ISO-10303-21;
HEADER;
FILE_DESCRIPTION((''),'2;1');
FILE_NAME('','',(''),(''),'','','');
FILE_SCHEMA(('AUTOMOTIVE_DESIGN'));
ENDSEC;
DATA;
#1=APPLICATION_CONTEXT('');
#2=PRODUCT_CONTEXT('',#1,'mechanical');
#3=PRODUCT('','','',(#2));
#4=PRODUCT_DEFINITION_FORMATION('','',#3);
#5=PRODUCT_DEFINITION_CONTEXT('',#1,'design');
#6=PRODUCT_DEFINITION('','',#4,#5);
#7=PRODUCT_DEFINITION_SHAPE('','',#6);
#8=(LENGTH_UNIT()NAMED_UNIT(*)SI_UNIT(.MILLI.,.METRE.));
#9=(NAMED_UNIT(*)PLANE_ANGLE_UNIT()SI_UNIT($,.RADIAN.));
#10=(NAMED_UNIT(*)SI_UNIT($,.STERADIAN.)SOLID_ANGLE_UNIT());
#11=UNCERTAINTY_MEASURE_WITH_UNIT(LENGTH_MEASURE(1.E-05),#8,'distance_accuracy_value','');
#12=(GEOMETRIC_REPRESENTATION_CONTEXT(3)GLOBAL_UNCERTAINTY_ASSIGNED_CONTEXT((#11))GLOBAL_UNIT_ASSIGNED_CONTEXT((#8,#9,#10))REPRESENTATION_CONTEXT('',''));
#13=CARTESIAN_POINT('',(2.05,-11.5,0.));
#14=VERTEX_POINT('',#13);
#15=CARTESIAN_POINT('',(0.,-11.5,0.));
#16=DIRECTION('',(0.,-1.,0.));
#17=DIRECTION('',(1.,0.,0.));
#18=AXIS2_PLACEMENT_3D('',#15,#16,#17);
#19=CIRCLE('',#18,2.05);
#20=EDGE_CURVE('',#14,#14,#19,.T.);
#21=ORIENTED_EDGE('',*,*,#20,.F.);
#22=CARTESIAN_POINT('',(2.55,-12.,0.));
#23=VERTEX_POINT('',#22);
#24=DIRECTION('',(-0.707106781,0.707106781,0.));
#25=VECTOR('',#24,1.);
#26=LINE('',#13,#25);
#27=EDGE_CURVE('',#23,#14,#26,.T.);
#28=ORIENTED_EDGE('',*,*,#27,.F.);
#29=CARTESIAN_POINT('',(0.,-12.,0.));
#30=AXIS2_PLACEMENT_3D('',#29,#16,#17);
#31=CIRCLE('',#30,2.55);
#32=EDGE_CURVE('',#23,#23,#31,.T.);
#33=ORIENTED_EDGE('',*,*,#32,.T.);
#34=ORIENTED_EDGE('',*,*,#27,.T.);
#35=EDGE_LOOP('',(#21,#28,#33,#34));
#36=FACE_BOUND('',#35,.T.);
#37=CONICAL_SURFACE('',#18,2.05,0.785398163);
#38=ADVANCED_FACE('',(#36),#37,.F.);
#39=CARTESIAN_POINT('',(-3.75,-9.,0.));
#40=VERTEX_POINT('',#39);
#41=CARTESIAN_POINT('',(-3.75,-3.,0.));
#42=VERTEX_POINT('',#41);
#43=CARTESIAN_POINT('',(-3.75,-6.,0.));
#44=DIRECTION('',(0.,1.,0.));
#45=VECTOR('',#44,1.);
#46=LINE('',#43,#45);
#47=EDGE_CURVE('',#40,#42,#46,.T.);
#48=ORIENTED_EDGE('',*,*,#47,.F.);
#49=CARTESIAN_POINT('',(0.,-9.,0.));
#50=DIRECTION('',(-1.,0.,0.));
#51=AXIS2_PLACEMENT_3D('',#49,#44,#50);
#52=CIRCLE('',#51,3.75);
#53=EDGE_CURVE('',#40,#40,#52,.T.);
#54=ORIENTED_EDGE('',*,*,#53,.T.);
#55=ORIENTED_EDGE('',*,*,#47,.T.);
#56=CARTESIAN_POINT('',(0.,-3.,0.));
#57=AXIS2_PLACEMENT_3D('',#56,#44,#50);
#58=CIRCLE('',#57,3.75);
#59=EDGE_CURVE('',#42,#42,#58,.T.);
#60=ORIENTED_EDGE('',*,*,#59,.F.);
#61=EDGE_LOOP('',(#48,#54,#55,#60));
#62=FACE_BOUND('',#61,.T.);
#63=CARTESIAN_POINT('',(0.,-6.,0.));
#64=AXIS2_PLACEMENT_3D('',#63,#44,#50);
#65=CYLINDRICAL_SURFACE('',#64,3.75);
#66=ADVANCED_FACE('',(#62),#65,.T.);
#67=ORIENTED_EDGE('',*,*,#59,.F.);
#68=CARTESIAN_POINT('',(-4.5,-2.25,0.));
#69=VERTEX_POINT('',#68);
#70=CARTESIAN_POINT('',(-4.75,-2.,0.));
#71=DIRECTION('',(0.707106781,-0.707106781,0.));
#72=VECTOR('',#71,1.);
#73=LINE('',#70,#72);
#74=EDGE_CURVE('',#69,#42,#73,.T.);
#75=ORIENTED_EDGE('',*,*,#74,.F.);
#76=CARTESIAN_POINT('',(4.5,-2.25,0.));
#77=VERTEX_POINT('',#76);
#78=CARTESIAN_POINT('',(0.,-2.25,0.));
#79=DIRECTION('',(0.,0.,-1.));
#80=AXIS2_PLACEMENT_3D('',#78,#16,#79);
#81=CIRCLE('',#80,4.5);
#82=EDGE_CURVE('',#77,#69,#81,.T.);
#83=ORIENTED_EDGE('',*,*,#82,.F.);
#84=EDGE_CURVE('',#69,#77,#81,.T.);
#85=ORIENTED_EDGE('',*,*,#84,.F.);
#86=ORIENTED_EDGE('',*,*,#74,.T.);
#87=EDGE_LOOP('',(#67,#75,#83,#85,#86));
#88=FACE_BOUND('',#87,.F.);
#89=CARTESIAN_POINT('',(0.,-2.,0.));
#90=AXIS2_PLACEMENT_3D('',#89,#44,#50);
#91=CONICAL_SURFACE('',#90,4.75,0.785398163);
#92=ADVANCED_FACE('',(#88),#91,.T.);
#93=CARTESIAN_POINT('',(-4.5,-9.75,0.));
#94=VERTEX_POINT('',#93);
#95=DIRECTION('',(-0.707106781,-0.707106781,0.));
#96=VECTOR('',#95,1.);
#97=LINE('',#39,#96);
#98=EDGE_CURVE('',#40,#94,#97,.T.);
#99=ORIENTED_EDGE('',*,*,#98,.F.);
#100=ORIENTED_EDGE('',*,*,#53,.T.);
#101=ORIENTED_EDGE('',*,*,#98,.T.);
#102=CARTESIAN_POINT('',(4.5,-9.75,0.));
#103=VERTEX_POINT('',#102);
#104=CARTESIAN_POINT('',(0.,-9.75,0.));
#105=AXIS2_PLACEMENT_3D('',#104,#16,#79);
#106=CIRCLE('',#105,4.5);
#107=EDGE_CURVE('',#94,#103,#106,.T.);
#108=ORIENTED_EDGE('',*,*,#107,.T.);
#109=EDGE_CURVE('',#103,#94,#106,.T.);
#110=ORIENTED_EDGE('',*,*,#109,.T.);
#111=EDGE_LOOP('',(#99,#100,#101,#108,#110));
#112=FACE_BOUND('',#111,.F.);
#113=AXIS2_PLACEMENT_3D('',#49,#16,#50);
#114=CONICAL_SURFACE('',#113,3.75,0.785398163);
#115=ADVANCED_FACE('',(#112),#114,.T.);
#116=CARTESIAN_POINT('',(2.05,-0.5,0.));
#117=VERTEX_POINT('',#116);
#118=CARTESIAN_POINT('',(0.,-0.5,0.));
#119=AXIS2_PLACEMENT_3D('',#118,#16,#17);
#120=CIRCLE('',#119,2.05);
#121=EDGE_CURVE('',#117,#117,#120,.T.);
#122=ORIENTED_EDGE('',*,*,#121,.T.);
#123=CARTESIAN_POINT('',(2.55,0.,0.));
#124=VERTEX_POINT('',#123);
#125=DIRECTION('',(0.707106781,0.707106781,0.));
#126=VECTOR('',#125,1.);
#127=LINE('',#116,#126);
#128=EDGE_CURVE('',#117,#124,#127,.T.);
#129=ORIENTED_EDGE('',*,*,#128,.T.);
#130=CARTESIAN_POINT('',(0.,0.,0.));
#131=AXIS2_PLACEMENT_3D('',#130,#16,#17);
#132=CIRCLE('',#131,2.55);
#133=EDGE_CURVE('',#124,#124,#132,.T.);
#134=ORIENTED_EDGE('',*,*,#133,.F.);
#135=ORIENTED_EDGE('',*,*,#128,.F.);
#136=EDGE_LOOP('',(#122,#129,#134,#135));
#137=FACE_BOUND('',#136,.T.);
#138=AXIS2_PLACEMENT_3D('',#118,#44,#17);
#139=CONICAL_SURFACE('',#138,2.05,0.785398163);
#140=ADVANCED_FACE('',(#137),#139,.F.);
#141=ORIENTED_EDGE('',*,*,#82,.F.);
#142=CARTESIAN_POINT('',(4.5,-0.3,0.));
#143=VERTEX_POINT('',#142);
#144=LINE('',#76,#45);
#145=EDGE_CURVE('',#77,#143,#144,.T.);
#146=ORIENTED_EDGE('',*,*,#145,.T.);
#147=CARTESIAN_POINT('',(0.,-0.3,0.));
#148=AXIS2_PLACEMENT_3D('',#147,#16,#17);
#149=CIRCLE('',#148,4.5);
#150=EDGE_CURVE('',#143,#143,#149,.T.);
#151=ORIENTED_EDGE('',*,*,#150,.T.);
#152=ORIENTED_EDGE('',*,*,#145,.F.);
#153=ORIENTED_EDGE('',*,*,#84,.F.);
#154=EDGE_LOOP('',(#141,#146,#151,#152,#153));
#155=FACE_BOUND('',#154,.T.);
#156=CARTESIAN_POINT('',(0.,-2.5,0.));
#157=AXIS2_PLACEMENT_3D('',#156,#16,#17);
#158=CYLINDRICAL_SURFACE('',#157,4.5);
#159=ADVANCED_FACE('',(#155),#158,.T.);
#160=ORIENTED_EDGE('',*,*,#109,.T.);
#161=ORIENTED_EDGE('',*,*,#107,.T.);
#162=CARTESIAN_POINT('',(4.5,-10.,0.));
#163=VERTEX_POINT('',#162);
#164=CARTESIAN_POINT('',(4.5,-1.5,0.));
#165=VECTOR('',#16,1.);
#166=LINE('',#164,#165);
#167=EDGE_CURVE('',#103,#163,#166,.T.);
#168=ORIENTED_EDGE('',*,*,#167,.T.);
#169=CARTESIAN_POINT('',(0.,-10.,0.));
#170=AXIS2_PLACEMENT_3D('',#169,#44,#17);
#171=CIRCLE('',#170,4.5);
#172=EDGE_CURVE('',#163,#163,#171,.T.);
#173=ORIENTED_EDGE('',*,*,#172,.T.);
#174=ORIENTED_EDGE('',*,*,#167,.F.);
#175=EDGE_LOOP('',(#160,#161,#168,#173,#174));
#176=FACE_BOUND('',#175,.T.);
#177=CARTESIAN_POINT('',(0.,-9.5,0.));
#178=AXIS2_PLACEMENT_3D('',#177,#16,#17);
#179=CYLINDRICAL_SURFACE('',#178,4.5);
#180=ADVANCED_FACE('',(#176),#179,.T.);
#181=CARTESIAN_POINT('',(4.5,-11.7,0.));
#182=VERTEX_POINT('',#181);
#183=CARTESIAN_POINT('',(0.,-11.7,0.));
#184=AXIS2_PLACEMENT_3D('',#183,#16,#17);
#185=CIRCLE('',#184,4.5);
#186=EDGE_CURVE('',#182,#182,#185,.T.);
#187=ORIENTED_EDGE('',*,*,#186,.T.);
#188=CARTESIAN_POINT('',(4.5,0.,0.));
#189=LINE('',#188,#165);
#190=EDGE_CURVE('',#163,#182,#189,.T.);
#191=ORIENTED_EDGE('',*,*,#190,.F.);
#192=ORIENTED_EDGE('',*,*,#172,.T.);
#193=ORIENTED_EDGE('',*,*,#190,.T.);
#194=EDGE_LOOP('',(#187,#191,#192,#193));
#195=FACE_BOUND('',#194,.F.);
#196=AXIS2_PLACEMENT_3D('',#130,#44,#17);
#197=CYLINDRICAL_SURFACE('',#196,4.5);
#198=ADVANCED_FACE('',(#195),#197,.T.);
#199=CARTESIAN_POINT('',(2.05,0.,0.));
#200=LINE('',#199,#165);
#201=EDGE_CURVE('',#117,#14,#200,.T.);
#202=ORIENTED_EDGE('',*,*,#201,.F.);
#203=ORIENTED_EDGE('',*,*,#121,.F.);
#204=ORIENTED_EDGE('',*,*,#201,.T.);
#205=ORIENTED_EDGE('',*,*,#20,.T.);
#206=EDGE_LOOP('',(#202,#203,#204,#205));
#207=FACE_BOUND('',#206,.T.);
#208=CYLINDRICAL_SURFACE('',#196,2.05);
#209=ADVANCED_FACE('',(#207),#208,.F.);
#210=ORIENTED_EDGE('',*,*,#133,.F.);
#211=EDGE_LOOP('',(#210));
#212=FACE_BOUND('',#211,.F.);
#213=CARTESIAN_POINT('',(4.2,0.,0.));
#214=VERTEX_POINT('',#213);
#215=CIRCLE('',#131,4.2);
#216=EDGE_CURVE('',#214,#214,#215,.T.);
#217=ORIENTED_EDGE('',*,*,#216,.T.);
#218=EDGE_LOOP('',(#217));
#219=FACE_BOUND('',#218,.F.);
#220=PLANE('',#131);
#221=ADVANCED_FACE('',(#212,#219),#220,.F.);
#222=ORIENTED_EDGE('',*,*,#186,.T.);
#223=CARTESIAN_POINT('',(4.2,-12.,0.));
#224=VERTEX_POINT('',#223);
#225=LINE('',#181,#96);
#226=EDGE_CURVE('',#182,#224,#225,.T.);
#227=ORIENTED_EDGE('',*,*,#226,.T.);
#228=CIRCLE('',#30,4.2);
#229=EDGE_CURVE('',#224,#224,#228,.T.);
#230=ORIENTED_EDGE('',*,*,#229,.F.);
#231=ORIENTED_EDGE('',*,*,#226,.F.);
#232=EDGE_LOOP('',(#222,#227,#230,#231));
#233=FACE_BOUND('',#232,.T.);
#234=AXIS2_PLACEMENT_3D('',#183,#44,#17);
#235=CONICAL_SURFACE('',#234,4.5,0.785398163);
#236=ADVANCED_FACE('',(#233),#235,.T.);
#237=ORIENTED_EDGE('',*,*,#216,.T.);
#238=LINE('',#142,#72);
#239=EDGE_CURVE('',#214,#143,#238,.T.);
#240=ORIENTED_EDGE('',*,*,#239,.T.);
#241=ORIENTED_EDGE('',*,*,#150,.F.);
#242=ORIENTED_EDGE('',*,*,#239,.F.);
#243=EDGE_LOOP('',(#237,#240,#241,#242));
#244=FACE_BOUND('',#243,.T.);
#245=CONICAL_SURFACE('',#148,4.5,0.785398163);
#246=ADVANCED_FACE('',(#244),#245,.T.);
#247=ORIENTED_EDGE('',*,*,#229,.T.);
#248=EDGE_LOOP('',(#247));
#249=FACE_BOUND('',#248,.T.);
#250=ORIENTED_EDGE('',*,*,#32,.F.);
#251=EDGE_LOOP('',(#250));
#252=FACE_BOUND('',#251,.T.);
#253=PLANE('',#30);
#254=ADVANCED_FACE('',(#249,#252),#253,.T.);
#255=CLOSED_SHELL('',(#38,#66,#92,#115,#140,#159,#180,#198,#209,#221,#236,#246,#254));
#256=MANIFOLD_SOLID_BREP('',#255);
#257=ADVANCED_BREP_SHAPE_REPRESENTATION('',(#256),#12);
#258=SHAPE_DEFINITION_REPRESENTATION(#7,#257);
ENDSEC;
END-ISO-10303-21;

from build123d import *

# Parameters (mm, degrees)
F0_R         = 4.5
F0_R_2       = 2.05
F1_DEPTH     = 12
F2_SIZE      = 0.3
F3_SIZE      = 0.5
F4_SIZE      = 0.5
F5_SIZE      = 0.3
F6_W         = 0.7801173814
F6_H         = 8
F8_S5_R      = 4.5
F8_T6_DEPTH  = 8
F8_S11_R     = 4.5
F8_T12_DEPTH = 8


# Not quite as in the source:
# - a fillet or chamfer that OpenCascade refuses, or shapes differently, is made with other operations: its cross-section is extruded or revolved along the edge and cut away or added


with BuildPart() as f1:
    # F0 (on Front) → F1 (new body)
    with BuildSketch(Plane.XZ):
        Circle(F0_R)
        Circle(F0_R_2, mode=Mode.SUBTRACT)
    extrude(amount=F1_DEPTH)

    # F2
    f2_edges = [f1.edges().sort_by_distance(p)[0] for p in [
        (-4.5, -12, 0),
    ]]
    chamfer(f2_edges, length=F2_SIZE)

    # F3
    f3_edges = [f1.edges().sort_by_distance(p)[0] for p in [
        (-2.05, -12, 0),
    ]]
    chamfer(f3_edges, length=F3_SIZE)

    # F4
    f4_edges = [f1.edges().sort_by_distance(p)[0] for p in [
        (-2.05, 0, 0),
    ]]
    chamfer(f4_edges, length=F4_SIZE)

    # F5
    f5_edges = [f1.edges().sort_by_distance(p)[0] for p in [
        (-4.5, 0, 0),
    ]]
    chamfer(f5_edges, length=F5_SIZE)

    # F6 (on Top) → F7 (revolve, cut)
    with BuildSketch(Plane.XY):
        with Locations((-4.1400586907, -6)):
            Rectangle(F6_W, F6_H)
    revolve(axis=Axis((0, 2.6414038148, 0), (0, 1, 0)), mode=Mode.SUBTRACT)

    # F8: chamfer of 1 on 3 edges, made by hand


with BuildPart() as f8_tool2:
    # F8_s3 → F8_t4 (revolve)
    with BuildSketch(Plane.XY):
        Polygon((-3.75, -9), (-4.75, -10), (-3.75, -10), align=None)
    revolve(axis=Axis((0, -10, 0), (0, 1, 0)))

    # F8_s5 → F8_t6 (intersect, symmetric)
    with BuildSketch(Plane.XZ.offset(9.5)):
        Circle(F8_S5_R)
    extrude(amount=F8_T6_DEPTH, both=True, mode=Mode.INTERSECT)


with BuildPart() as f1_1:
    add(f1.part)

    # F8_t1: union F8_tool2
    add(f8_tool2.part)


with BuildPart() as f8_tool8:
    # F8_s9 → F8_t10 (revolve)
    with BuildSketch(Plane.XY):
        Polygon((-4.75, -2), (-3.75, -3), (-3.75, -2), align=None)
    revolve(axis=Axis((0, -2, 0), (0, 1, 0)))

    # F8_s11 → F8_t12 (intersect, symmetric)
    with BuildSketch(Plane.XZ.offset(2.5)):
        Circle(F8_S11_R)
    extrude(amount=F8_T12_DEPTH, both=True, mode=Mode.INTERSECT)


with BuildPart() as f1_2:
    add(f1_1.part)

    # F8_t7: union F8_tool8
    add(f8_tool8.part)


solid = f1_2.part
